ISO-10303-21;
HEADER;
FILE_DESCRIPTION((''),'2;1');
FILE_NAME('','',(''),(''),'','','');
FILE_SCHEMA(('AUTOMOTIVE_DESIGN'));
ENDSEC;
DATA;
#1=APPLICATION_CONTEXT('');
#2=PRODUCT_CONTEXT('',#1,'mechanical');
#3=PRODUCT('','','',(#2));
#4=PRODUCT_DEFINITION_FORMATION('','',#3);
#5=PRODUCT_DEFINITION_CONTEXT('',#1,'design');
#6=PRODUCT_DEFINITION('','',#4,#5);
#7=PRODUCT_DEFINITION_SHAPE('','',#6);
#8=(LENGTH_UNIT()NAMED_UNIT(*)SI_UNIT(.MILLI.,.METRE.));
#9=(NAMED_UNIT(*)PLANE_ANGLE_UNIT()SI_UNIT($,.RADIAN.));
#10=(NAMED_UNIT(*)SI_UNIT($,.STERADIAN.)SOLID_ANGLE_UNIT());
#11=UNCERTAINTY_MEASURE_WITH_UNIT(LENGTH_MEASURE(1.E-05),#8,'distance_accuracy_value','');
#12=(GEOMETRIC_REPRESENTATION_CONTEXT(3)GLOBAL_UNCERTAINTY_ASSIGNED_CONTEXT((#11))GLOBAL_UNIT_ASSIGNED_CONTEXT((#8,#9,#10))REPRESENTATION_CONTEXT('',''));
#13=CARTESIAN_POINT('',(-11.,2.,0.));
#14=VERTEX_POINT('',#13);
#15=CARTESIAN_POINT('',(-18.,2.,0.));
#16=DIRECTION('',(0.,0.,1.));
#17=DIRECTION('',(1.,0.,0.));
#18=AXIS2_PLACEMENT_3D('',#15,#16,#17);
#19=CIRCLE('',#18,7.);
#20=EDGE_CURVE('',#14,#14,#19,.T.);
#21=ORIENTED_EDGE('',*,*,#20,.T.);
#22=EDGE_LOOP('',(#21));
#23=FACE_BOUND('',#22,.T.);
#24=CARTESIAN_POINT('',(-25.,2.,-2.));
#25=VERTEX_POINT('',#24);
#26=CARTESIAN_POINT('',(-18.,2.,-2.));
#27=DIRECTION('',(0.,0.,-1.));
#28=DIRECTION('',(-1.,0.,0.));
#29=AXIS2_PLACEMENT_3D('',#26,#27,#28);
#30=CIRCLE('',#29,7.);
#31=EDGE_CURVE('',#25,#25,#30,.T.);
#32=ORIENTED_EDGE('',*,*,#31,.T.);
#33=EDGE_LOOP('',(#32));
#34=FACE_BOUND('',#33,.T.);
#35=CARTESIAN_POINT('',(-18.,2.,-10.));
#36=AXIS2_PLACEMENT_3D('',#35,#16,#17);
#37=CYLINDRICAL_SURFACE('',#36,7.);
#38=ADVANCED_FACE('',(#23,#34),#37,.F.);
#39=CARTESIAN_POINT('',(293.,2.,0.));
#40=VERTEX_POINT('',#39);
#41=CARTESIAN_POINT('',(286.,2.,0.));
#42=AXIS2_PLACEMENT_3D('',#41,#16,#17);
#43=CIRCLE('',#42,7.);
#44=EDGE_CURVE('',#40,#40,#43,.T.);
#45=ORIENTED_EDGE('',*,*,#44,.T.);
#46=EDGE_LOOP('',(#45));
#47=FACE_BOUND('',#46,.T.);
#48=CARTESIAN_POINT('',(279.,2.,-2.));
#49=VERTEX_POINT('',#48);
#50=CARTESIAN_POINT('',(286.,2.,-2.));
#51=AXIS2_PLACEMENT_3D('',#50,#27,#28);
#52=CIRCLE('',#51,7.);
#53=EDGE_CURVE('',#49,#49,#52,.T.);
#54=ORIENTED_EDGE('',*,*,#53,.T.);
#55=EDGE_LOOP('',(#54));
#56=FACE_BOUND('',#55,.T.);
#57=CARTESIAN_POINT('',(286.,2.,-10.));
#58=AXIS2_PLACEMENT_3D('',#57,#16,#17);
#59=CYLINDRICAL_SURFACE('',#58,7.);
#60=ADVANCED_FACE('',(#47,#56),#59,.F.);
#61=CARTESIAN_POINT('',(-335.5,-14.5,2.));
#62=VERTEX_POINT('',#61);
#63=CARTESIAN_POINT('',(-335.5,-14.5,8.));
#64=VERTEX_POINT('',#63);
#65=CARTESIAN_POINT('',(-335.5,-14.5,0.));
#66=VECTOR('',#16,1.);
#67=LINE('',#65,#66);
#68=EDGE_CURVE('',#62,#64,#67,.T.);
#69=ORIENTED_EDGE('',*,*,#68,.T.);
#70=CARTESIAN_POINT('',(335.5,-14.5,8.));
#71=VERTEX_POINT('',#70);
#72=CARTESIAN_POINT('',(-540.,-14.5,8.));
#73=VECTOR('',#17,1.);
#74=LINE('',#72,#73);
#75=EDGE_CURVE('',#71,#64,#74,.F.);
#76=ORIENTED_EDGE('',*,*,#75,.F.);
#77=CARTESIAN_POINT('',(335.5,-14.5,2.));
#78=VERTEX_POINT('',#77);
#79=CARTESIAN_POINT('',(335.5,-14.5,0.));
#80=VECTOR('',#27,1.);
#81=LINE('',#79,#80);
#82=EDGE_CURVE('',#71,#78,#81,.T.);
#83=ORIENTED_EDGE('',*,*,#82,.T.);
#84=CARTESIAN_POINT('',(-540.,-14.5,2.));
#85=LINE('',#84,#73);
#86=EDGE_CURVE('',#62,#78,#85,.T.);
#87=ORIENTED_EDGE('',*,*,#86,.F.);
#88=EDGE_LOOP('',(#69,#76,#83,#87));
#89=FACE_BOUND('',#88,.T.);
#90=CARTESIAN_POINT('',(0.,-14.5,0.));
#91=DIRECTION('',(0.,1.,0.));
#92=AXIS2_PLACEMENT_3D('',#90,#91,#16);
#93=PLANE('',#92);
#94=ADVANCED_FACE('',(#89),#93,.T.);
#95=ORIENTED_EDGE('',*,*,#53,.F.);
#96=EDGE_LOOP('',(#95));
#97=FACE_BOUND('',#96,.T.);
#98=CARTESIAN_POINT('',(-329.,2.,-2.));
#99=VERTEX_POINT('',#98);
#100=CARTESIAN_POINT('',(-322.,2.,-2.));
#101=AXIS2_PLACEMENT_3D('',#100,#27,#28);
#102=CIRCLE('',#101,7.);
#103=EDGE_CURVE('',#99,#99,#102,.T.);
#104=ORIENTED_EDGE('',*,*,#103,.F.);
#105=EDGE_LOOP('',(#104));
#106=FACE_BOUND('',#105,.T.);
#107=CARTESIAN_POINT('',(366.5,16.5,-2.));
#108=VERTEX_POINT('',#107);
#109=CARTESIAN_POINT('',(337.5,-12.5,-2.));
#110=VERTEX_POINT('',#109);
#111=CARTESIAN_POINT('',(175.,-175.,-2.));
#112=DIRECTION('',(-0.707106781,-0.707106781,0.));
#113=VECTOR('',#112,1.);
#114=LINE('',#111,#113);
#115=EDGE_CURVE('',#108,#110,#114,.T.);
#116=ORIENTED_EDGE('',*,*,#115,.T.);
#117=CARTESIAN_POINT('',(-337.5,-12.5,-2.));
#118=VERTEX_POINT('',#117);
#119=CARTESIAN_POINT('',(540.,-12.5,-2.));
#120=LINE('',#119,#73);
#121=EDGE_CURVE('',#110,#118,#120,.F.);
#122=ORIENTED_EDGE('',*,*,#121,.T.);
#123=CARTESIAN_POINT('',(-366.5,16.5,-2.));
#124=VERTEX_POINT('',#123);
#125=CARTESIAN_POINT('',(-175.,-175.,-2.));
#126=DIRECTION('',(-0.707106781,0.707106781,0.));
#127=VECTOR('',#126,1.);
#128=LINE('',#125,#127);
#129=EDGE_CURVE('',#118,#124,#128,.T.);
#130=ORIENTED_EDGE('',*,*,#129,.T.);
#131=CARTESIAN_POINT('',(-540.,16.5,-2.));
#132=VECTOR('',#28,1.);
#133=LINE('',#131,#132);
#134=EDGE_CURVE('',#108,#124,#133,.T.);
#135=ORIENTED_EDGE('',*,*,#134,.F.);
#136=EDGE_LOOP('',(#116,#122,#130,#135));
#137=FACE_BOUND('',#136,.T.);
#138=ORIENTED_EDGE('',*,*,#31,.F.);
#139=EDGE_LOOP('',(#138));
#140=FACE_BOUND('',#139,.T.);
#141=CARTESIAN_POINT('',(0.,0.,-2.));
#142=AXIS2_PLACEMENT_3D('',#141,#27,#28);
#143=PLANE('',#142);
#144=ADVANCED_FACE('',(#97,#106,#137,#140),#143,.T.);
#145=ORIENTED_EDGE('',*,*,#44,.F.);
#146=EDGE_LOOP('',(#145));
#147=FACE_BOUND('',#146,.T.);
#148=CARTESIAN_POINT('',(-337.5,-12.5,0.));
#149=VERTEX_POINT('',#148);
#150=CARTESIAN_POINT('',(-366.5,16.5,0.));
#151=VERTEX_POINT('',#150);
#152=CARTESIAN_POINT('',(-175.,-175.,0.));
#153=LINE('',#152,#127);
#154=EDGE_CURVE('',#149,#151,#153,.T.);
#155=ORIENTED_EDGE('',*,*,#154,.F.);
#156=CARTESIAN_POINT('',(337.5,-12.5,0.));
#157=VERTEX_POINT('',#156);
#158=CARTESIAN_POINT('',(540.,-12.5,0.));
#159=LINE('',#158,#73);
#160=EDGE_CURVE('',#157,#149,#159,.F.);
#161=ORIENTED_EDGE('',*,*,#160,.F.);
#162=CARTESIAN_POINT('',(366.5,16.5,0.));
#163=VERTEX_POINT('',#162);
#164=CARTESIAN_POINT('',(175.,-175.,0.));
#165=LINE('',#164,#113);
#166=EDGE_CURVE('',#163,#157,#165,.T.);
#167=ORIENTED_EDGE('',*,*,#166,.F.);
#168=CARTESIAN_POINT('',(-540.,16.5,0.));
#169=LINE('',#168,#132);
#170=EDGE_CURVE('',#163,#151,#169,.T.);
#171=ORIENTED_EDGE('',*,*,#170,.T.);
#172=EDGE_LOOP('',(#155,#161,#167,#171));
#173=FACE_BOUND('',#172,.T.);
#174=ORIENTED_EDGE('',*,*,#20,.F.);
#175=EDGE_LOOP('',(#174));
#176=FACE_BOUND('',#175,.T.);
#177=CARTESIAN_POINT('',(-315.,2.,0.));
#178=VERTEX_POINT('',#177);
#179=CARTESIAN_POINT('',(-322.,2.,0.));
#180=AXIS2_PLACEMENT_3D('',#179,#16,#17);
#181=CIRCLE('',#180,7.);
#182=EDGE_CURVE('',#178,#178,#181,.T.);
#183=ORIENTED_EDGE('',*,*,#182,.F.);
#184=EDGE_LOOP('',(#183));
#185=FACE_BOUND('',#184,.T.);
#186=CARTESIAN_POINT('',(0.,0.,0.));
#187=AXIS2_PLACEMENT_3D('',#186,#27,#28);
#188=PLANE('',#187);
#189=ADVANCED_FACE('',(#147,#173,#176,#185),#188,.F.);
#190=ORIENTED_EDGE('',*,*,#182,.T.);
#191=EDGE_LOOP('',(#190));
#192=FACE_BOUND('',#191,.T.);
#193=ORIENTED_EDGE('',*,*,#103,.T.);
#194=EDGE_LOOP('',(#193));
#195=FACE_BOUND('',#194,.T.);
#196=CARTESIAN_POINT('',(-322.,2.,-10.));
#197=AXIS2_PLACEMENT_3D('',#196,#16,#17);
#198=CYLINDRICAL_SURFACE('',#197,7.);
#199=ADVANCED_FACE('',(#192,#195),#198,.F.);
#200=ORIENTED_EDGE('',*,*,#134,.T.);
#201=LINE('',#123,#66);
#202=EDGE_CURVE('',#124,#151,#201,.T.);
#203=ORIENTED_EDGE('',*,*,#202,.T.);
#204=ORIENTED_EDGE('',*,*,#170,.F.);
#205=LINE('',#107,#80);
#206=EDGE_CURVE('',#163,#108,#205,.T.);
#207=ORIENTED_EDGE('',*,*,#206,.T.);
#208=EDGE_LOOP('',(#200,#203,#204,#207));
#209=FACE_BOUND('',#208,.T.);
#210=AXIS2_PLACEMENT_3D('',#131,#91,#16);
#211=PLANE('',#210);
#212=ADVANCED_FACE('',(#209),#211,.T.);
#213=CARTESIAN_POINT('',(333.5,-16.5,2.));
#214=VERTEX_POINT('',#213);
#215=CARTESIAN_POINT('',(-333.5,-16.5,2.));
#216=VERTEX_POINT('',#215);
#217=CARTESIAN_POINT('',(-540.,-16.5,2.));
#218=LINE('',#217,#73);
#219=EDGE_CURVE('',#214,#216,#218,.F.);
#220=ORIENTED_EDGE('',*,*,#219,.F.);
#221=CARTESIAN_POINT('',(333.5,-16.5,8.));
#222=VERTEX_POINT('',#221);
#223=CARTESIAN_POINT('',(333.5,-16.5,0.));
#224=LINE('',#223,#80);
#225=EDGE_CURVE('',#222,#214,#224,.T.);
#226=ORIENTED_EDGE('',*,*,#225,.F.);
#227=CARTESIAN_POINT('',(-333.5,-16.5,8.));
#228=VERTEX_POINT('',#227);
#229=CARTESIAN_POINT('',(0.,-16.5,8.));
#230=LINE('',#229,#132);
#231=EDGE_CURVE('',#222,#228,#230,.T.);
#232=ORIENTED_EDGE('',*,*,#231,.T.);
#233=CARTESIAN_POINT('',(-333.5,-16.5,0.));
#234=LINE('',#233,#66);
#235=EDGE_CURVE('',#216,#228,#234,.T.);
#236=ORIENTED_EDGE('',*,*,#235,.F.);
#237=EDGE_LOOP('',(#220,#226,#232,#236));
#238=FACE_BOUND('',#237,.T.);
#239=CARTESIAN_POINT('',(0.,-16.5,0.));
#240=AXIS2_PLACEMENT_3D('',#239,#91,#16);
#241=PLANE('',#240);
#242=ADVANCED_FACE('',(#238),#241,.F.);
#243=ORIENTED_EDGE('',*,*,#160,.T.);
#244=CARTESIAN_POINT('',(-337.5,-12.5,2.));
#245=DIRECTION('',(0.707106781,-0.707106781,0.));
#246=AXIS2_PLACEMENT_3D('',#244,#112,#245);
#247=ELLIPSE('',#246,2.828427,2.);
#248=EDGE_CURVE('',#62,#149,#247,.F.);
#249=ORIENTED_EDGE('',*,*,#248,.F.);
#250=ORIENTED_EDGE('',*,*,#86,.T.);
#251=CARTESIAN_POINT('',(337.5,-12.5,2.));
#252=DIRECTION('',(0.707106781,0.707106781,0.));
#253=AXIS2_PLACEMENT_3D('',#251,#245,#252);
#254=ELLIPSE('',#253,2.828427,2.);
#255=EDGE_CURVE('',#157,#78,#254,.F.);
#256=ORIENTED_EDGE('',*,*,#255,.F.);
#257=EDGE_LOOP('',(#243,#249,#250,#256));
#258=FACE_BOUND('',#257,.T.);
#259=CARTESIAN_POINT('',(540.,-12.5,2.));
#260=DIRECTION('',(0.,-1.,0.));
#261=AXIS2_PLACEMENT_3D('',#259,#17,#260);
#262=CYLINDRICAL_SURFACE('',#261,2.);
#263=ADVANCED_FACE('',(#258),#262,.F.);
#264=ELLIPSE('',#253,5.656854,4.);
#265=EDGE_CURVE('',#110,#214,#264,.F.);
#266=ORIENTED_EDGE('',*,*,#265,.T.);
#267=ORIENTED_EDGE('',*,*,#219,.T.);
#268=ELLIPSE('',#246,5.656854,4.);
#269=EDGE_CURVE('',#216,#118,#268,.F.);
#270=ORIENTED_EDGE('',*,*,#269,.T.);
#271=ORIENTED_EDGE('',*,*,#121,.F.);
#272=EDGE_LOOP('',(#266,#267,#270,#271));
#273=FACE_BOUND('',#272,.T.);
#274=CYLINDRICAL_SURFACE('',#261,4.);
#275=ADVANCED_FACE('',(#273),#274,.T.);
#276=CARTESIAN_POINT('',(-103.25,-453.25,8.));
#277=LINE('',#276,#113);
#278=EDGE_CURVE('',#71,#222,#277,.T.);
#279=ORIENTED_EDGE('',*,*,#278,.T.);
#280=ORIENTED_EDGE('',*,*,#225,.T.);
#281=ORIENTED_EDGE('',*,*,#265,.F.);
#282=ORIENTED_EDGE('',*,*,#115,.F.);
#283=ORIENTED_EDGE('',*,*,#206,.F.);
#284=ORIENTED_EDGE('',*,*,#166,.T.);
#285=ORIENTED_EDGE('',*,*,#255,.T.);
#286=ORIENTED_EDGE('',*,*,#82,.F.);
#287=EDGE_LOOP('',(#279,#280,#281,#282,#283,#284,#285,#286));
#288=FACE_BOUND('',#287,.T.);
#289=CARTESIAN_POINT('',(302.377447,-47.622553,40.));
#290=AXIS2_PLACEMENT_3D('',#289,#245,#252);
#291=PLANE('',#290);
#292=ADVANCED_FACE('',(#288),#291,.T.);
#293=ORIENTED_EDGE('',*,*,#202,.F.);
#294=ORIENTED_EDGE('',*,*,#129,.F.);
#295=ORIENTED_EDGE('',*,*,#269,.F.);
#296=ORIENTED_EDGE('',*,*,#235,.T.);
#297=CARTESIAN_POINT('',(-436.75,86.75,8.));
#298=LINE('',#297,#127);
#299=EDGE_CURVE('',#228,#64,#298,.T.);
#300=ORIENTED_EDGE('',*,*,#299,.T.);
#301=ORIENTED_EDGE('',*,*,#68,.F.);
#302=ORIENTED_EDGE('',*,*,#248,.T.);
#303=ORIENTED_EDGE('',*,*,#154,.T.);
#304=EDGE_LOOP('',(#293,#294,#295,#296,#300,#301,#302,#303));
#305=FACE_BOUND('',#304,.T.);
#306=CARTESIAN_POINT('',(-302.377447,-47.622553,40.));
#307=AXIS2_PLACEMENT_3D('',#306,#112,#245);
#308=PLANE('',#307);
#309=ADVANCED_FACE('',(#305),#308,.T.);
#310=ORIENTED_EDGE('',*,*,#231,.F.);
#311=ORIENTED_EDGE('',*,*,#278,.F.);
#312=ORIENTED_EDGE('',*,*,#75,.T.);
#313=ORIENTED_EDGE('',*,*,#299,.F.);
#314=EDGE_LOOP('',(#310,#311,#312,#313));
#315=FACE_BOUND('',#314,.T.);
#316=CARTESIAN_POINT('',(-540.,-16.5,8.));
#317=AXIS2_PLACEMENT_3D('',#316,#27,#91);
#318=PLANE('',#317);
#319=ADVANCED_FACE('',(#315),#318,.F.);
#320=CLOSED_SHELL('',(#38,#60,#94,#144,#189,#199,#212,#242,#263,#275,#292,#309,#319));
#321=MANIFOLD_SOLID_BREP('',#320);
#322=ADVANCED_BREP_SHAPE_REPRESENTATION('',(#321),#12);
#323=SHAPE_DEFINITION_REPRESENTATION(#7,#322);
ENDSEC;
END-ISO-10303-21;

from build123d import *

# Parameters (mm, degrees)
SKETCH1_W                    = 1080
SKETCH1_H                    = 33
BASE_FLANGE1_DEPTH           = 2
EDGE_FLANGE1_STRIP_W         = 12
EDGE_FLANGE1_STRIP_H         = 2
EDGE_FLANGE1_STRIP_CUT_DEPTH = 1080
EDGE_FLANGE1_DEPTH           = 1080
SKETCH9_R                    = 7
CUT_EXTRUDE1_DEPTH           = 10
CUT_EXTRUDE2_DEPTH           = 40
CUT_EXTRUDE2_DEPTH_BACK      = 40


# Sheet-metal steps are written as plain solids
with BuildPart() as part:
    # Sketch1 → Base-Flange1 (new body)
    with BuildSketch(Plane.XY):
        Rectangle(SKETCH1_W, SKETCH1_H)
    extrude(amount=-BASE_FLANGE1_DEPTH)

    # Edge-Flange1 strip (across the edge) → Edge-Flange1 strip cut (cut)
    with BuildSketch(Plane(origin=(-540, -16.5, 0), x_dir=(0, 1, 0), z_dir=(1, 0, 0))):
        with Locations((-2, -1)):
            Rectangle(EDGE_FLANGE1_STRIP_W, EDGE_FLANGE1_STRIP_H)
    extrude(amount=EDGE_FLANGE1_STRIP_CUT_DEPTH, mode=Mode.SUBTRACT)

    # Edge-Flange1 section (across the edge) → Edge-Flange1 (add)
    with BuildSketch(Plane(origin=(-540, -16.5, 0), x_dir=(0, 1, 0), z_dir=(1, 0, 0))):
        with BuildLine():
            Line((0, 2), (0, 8))
            Line((0, 8), (2, 8))
            Line((2, 8), (2, 2))
            ThreePointArc((2, 2), (2.585786438, 0.585786438), (4, 0))
            Line((4, 0), (4, -2))
            ThreePointArc((4, -2), (1.171572875, -0.828427125), (0, 2))
        make_face()
    extrude(amount=EDGE_FLANGE1_DEPTH)

    # Sketch9 → Cut-Extrude1 (cut)
    with BuildSketch(Plane.XY):
        with Locations((-930, 2)):
            Circle(SKETCH9_R)
        with Locations((-626, 2)):
            Circle(SKETCH9_R)
        with Locations((-322, 2)):
            Circle(SKETCH9_R)
        with Locations((-18, 2)):
            Circle(SKETCH9_R)
        with Locations((286, 2)):
            Circle(SKETCH9_R)
        with Locations((590, 2)):
            Circle(SKETCH9_R)
        with Locations((894, 2)):
            Circle(SKETCH9_R)
    extrude(amount=-CUT_EXTRUDE1_DEPTH, mode=Mode.SUBTRACT)

    # Sketch10 → Cut-Extrude2 (cut, two sides: drawn at the far end of the back side and taken through both)
    with BuildSketch(Plane.XY.offset(-CUT_EXTRUDE2_DEPTH_BACK)):
        Polygon((-302.377446669, -47.622553331), (-401.622553331, 51.622553331), (-590.417878705, 51.622553331), (-583.65364731, -79.056750642), (-558.625991149, -79.056750642), align=None)
        Polygon((558.625991149, -79.056750642), (302.377446669, -47.622553331), (401.622553331, 51.622553331), (590.417878705, 51.622553331), (583.65364731, -79.056750642), align=None)
    extrude(amount=CUT_EXTRUDE2_DEPTH + CUT_EXTRUDE2_DEPTH_BACK, mode=Mode.SUBTRACT)


solid = part.part
